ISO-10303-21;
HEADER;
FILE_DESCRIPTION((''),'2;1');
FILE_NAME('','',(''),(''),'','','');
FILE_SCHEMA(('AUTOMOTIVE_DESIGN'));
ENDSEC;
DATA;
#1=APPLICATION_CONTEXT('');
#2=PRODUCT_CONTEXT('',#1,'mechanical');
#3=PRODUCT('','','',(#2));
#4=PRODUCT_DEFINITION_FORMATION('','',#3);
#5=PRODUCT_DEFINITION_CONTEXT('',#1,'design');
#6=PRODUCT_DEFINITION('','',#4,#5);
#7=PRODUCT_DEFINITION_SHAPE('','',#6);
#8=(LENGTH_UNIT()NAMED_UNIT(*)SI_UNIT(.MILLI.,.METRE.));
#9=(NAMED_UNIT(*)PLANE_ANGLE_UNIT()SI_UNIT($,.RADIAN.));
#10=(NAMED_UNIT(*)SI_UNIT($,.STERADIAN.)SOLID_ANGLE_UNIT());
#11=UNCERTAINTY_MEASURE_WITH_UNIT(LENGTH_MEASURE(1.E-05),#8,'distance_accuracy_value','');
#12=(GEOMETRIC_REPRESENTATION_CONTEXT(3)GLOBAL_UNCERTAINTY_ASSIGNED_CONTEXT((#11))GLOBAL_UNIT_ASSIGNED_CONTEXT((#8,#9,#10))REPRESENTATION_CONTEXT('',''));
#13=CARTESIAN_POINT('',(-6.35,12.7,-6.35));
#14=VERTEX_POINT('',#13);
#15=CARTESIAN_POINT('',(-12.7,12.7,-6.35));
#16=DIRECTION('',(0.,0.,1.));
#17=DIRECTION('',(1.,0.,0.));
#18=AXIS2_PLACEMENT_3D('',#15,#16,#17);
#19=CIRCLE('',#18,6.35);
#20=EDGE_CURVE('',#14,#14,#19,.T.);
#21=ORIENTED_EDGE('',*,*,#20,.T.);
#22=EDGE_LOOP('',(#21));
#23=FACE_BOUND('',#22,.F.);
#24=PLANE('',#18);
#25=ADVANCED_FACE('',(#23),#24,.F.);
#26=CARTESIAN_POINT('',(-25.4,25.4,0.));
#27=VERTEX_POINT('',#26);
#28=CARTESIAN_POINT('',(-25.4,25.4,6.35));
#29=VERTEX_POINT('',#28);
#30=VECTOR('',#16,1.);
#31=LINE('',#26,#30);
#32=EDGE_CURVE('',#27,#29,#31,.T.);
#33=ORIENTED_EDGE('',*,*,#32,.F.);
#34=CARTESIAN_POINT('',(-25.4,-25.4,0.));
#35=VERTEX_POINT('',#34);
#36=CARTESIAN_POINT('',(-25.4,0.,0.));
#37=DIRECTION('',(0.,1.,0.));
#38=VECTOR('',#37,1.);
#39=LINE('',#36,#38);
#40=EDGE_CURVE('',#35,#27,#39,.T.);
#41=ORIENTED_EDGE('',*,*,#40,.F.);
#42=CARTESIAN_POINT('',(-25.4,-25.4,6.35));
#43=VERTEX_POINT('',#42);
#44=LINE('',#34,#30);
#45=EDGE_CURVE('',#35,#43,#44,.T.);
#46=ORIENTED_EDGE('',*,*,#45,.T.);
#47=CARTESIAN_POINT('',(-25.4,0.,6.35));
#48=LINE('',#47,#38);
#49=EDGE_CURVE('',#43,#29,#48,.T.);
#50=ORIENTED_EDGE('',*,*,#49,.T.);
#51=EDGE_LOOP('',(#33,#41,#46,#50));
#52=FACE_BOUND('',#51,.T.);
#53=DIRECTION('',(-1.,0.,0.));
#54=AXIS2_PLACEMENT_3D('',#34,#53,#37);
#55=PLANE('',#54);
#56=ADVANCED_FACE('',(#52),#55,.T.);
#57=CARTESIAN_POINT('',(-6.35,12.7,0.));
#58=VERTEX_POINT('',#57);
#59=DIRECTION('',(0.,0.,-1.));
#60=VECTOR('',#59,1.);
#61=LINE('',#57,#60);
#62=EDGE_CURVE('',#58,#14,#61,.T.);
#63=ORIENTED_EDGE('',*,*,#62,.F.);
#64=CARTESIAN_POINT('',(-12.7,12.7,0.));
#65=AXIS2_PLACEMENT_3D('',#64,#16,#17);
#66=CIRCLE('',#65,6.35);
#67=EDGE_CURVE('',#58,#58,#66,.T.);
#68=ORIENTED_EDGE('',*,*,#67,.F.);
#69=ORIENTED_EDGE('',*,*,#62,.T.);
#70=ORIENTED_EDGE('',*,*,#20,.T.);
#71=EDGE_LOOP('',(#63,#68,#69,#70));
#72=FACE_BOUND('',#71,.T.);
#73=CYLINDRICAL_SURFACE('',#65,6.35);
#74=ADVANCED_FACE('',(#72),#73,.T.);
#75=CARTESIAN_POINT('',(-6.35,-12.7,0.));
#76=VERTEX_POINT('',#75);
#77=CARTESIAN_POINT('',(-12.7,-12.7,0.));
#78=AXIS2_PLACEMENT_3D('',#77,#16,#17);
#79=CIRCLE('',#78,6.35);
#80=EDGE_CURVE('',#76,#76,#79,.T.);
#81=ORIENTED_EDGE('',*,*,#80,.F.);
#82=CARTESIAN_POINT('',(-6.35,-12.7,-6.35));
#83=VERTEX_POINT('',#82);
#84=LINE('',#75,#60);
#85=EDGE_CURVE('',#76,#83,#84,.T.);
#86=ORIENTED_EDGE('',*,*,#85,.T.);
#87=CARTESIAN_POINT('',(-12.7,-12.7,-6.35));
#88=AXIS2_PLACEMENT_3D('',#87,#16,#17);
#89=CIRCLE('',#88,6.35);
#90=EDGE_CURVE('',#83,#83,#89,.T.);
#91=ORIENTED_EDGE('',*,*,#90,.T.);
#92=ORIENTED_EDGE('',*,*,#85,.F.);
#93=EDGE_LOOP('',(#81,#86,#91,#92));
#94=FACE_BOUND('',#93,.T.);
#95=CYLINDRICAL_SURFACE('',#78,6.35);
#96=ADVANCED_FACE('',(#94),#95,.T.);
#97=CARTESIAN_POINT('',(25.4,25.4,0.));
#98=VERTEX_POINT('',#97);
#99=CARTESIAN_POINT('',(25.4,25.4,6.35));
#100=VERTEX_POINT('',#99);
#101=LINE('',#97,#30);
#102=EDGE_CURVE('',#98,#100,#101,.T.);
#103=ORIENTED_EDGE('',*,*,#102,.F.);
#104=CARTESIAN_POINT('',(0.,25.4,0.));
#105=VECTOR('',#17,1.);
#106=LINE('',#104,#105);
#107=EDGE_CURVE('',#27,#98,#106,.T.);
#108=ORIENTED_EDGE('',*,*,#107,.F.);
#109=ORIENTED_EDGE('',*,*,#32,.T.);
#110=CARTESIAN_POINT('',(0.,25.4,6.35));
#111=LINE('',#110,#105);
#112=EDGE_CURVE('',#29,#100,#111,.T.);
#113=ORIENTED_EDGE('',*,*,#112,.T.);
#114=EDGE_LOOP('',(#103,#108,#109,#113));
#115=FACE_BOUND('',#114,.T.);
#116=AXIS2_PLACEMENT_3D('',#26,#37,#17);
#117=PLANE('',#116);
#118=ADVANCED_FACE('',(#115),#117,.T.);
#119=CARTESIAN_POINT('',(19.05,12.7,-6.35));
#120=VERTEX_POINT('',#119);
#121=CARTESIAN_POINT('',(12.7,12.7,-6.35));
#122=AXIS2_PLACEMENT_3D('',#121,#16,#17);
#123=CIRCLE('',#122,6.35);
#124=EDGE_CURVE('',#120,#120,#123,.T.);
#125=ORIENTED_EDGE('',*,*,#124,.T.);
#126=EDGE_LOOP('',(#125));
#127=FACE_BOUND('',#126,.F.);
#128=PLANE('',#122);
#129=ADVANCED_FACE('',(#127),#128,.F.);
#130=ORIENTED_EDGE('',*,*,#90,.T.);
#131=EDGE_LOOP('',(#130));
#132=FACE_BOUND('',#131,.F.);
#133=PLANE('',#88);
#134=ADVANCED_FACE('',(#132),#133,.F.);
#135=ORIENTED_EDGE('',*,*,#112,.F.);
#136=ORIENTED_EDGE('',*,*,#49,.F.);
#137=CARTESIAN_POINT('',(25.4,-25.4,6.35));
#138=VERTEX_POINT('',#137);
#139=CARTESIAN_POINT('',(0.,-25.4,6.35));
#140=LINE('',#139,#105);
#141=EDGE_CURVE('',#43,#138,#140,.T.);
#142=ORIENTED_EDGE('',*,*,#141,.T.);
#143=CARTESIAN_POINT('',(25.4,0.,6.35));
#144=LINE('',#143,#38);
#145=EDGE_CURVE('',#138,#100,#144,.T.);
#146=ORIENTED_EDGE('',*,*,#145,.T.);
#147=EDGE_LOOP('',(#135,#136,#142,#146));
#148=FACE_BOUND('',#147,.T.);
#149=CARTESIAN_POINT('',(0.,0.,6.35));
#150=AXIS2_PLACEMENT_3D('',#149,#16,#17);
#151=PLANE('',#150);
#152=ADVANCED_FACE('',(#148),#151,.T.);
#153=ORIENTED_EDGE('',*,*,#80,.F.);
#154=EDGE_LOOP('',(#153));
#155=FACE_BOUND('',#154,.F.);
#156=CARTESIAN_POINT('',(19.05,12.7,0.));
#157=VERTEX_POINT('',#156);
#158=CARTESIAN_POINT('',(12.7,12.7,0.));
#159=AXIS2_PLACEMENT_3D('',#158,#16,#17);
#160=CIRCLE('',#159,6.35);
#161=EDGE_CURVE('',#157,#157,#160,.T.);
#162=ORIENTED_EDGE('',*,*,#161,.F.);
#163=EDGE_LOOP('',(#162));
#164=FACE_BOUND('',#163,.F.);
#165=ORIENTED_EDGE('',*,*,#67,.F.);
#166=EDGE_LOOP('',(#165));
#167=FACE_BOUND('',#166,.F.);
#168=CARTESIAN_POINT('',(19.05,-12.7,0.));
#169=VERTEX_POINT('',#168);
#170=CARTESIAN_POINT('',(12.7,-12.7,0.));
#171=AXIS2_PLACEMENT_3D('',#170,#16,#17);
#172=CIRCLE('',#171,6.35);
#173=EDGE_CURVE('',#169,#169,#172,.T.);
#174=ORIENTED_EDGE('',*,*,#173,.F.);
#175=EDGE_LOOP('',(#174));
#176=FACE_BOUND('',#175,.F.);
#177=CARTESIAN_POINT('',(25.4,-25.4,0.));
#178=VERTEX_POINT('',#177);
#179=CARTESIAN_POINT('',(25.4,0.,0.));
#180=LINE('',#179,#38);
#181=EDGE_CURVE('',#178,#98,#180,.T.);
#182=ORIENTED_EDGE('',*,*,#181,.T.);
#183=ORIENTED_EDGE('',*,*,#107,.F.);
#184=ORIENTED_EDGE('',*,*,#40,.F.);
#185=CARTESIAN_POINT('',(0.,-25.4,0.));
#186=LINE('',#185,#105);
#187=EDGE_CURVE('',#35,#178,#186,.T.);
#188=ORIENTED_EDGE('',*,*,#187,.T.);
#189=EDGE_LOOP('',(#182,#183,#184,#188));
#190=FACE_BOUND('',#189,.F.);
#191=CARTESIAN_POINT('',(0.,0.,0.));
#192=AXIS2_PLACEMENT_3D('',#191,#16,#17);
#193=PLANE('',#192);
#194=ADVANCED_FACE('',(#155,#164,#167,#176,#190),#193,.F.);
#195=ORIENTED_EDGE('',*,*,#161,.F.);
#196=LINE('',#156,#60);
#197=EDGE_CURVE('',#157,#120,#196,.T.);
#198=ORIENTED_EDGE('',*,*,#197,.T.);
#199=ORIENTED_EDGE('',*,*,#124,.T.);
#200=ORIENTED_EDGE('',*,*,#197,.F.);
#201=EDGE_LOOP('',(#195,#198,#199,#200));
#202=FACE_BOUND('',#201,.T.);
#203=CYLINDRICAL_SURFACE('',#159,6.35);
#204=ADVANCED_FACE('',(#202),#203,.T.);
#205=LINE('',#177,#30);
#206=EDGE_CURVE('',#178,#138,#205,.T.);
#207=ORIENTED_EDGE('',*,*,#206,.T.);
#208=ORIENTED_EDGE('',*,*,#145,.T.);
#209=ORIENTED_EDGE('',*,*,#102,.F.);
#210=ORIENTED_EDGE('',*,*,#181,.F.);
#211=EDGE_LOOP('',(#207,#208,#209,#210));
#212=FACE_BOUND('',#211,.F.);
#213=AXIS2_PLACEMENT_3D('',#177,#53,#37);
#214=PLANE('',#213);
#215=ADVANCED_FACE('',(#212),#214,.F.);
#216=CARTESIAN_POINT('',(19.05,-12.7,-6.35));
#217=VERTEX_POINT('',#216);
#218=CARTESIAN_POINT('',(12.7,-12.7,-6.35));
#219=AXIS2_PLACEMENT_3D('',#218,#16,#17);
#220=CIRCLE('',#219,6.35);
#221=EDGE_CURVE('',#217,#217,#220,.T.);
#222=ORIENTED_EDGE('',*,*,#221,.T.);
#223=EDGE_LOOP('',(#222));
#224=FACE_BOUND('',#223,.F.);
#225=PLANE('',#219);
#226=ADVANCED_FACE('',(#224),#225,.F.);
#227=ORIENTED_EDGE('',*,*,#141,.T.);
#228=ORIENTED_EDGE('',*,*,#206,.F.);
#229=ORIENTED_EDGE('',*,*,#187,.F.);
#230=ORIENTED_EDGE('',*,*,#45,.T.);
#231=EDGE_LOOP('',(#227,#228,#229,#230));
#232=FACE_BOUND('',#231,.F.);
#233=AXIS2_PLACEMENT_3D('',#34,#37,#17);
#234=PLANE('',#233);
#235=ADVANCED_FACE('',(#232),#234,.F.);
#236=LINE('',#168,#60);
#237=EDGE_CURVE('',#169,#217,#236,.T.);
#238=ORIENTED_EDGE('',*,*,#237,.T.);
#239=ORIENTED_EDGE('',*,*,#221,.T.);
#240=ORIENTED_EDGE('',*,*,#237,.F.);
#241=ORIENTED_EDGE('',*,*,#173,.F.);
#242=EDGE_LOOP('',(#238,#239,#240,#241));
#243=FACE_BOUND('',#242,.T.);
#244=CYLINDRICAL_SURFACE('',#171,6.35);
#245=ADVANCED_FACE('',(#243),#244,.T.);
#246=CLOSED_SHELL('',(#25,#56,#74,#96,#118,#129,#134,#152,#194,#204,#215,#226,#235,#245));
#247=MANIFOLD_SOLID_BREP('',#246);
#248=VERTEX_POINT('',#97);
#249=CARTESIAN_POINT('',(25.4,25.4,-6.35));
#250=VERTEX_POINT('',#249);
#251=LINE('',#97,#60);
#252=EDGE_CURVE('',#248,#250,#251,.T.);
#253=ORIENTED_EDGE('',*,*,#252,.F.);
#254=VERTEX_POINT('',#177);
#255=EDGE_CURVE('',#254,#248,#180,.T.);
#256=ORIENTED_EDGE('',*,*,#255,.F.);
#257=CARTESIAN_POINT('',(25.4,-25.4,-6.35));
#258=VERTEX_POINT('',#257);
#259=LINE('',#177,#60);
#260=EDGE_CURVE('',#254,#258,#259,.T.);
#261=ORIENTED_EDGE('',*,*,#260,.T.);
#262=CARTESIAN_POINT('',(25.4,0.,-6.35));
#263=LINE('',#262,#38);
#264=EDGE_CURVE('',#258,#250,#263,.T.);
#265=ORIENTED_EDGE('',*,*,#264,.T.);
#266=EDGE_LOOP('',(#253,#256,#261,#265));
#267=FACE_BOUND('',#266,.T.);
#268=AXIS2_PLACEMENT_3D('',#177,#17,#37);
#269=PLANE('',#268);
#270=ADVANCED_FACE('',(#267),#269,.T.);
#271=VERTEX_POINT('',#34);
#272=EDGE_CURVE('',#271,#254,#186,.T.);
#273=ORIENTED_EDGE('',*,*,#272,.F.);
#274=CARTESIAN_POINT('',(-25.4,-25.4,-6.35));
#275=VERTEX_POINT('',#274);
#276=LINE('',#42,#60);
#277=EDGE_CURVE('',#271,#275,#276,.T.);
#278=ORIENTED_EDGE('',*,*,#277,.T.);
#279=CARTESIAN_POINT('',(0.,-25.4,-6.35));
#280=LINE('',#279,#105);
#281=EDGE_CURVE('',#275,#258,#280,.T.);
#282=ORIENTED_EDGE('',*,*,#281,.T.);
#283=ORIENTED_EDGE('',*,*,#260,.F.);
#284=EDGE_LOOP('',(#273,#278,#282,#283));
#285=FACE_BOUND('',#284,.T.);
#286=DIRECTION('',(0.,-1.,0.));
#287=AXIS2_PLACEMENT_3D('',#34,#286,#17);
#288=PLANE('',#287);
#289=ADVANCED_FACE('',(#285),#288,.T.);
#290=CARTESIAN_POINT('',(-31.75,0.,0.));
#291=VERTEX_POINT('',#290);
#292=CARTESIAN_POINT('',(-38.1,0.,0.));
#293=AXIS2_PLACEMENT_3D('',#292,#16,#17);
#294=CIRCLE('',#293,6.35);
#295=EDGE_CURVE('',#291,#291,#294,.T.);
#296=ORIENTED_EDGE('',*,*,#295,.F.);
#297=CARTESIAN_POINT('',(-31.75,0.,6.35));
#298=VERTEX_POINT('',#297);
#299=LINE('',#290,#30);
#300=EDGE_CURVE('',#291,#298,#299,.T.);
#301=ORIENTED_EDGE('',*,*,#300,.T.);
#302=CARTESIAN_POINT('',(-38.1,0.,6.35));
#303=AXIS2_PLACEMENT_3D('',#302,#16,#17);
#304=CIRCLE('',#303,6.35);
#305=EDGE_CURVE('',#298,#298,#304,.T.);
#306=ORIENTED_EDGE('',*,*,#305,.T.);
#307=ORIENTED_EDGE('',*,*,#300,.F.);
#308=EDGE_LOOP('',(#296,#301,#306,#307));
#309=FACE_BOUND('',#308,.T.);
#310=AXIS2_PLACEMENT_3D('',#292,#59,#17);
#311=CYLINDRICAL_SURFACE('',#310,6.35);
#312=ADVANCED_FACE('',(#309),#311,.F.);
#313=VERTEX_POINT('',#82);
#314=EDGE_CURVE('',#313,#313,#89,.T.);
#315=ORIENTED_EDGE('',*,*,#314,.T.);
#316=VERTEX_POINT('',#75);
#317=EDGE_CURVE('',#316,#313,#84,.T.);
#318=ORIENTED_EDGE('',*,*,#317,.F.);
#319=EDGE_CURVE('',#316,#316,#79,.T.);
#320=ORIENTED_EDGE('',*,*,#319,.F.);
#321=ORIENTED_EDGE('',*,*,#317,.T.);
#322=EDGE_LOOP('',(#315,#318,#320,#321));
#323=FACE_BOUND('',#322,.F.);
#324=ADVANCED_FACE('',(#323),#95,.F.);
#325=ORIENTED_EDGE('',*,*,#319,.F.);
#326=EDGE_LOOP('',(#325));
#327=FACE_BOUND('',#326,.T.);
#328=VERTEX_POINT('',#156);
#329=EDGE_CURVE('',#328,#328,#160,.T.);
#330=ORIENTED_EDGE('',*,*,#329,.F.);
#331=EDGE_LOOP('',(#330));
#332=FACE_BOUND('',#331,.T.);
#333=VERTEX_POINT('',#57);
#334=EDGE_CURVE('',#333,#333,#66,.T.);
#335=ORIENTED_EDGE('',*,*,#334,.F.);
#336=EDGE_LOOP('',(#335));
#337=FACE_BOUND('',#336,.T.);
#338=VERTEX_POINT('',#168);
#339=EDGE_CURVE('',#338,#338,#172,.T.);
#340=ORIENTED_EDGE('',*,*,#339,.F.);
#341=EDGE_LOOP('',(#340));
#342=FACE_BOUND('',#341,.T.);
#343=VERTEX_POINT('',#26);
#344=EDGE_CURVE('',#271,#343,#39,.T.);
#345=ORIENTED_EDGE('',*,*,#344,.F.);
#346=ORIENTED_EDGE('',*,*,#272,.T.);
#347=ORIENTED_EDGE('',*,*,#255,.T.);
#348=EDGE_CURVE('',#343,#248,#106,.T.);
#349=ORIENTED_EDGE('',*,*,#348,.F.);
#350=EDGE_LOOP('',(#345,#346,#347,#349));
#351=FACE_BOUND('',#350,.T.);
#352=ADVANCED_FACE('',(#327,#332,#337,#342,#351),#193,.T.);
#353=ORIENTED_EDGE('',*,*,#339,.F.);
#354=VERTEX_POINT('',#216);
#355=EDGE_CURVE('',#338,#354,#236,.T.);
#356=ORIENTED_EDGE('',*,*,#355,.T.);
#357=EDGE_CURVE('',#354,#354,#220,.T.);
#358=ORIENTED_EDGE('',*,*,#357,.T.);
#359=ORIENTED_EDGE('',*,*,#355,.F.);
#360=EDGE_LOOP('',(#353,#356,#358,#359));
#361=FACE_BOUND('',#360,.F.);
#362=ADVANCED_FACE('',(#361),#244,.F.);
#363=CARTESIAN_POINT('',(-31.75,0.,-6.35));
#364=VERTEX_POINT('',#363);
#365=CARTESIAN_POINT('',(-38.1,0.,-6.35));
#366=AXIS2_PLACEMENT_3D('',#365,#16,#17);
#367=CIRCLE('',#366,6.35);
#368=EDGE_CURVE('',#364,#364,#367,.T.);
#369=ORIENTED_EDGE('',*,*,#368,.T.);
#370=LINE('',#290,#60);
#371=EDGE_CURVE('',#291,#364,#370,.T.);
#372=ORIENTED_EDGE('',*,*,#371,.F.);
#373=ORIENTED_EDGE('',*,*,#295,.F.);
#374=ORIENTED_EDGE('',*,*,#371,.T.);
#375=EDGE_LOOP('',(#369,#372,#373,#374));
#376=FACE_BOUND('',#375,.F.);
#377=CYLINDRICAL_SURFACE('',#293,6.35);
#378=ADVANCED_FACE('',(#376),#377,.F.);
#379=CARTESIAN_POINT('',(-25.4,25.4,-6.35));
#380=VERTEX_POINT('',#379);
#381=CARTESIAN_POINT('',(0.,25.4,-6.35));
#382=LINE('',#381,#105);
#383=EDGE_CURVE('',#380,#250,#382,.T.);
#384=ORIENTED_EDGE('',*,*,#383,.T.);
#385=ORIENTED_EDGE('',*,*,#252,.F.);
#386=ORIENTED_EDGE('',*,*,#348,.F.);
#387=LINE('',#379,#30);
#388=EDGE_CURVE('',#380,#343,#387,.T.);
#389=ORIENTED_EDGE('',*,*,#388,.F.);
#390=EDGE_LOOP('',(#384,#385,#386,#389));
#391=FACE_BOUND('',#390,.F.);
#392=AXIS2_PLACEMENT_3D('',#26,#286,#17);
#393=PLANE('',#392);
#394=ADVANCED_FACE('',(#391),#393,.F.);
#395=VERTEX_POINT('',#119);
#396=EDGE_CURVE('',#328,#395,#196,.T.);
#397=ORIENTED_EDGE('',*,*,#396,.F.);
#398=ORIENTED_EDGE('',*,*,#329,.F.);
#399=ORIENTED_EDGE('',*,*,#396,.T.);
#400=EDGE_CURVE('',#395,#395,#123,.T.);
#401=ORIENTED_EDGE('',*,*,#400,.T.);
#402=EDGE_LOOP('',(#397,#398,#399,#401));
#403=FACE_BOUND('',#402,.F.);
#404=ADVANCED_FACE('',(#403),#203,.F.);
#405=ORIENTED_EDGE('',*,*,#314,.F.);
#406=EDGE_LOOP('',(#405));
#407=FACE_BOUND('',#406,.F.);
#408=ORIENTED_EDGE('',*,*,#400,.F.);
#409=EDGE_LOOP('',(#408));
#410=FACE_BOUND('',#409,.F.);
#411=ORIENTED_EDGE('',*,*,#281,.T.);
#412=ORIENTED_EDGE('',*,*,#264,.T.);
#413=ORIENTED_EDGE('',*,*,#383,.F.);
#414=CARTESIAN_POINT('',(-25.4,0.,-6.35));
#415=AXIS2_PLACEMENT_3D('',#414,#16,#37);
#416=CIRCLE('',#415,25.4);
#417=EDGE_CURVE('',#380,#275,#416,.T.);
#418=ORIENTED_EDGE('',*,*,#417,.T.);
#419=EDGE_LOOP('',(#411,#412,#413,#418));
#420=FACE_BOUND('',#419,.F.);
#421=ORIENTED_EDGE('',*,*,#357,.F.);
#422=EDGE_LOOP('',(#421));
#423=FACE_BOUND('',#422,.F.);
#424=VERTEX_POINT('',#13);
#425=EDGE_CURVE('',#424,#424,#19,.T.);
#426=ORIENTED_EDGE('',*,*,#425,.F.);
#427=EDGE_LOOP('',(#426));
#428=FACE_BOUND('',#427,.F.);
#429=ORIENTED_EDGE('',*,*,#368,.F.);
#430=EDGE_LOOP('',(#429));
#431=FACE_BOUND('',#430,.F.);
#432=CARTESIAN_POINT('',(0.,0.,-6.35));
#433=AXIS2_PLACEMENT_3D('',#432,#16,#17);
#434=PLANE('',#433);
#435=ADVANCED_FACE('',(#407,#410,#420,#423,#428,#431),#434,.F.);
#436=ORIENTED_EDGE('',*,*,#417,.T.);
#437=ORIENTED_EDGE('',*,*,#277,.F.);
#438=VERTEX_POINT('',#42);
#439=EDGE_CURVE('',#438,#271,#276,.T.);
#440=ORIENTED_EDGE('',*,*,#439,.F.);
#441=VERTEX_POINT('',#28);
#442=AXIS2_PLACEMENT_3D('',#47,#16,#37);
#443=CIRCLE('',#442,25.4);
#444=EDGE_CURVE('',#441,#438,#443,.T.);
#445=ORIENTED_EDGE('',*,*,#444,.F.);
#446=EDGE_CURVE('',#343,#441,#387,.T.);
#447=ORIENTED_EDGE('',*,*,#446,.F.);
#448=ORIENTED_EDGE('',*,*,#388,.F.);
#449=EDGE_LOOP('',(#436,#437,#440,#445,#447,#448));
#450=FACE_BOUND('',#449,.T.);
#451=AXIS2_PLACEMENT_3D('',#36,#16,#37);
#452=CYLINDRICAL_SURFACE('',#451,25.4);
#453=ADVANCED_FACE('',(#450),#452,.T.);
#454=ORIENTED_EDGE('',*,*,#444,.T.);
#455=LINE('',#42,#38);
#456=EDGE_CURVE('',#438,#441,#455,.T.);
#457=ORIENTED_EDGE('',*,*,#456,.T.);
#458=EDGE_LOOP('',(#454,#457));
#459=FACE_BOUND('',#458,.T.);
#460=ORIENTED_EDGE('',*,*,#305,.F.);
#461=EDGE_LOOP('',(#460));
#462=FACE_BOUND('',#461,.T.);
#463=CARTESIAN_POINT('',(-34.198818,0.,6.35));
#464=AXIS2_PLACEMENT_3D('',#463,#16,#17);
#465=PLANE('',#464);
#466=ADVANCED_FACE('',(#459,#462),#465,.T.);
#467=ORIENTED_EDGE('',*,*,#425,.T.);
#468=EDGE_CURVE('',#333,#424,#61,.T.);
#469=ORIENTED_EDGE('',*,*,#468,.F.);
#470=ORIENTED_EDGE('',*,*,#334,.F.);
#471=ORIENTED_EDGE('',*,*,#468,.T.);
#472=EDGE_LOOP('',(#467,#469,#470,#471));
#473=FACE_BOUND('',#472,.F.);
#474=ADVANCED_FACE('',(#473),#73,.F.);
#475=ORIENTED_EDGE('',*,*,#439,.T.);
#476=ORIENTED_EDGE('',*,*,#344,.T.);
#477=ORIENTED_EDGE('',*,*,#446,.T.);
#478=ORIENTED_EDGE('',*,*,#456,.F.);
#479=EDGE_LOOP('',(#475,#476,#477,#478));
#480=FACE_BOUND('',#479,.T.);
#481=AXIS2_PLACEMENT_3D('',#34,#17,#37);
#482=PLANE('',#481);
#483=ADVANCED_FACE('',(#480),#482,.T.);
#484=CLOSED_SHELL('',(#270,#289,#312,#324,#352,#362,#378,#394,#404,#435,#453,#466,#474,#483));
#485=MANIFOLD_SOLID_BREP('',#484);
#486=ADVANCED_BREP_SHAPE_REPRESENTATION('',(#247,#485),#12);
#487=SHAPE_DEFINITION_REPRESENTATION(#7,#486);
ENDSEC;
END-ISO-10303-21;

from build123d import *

# Parameters (mm, degrees)
F0_R          = 6.35
F1_DEPTH      = 6.35
F1_DEPTH_BACK = 6.35
F0_W          = 50.8
F0_H          = 50.8
F2_DEPTH      = 6.35
F3_DEPTH      = 6.35
F4_DEPTH      = 6.35


with BuildPart() as f1:
    # F0 (on Top) → F1 (new body, two sides)
    with BuildSketch(Plane.XY) as f1_sk:
        with BuildLine():
            Line((-25.4, -25.4), (-25.4, 25.4))
            ThreePointArc((-25.4, 25.4), (-50.8, 0), (-25.4, -25.4))
        make_face()
        with Locations((-38.1, 0)):
            Circle(F0_R, mode=Mode.SUBTRACT)
    extrude(amount=F1_DEPTH)
    extrude(f1_sk.sketch, amount=-F1_DEPTH_BACK)

    # F0 (on Top) → F2 (join)
    with BuildSketch(Plane.XY):
        Rectangle(F0_W, F0_H)
        with Locations((-12.7, -12.7)):
            Circle(F0_R, mode=Mode.SUBTRACT)
        with Locations((12.7, -12.7)):
            Circle(F0_R, mode=Mode.SUBTRACT)
        with Locations((-12.7, 12.7)):
            Circle(F0_R, mode=Mode.SUBTRACT)
        with Locations((12.7, 12.7)):
            Circle(F0_R, mode=Mode.SUBTRACT)
    extrude(amount=-F2_DEPTH)


with BuildPart() as f3:
    # F0 (on Top) → F3 (new body)
    with BuildSketch(Plane.XY):
        Rectangle(F0_W, F0_H)
        with Locations((-12.7, -12.7)):
            Circle(F0_R, mode=Mode.SUBTRACT)
        with Locations((12.7, -12.7)):
            Circle(F0_R, mode=Mode.SUBTRACT)
        with Locations((-12.7, 12.7)):
            Circle(F0_R, mode=Mode.SUBTRACT)
        with Locations((12.7, 12.7)):
            Circle(F0_R, mode=Mode.SUBTRACT)
        with Locations((-12.7, -12.7)):
            Circle(F0_R)
        with Locations((12.7, -12.7)):
            Circle(F0_R)
        with Locations((12.7, 12.7)):
            Circle(F0_R)
        with Locations((-12.7, 12.7)):
            Circle(F0_R)
    extrude(amount=F3_DEPTH)

    # F0 (on Top) → F4 (join)
    with BuildSketch(Plane.XY):
        with Locations((12.7, -12.7)):
            Circle(F0_R)
        with Locations((12.7, 12.7)):
            Circle(F0_R)
        with Locations((-12.7, 12.7)):
            Circle(F0_R)
        with Locations((-12.7, -12.7)):
            Circle(F0_R)
    extrude(amount=-F4_DEPTH)


solid = Compound([f1.part, f3.part])
